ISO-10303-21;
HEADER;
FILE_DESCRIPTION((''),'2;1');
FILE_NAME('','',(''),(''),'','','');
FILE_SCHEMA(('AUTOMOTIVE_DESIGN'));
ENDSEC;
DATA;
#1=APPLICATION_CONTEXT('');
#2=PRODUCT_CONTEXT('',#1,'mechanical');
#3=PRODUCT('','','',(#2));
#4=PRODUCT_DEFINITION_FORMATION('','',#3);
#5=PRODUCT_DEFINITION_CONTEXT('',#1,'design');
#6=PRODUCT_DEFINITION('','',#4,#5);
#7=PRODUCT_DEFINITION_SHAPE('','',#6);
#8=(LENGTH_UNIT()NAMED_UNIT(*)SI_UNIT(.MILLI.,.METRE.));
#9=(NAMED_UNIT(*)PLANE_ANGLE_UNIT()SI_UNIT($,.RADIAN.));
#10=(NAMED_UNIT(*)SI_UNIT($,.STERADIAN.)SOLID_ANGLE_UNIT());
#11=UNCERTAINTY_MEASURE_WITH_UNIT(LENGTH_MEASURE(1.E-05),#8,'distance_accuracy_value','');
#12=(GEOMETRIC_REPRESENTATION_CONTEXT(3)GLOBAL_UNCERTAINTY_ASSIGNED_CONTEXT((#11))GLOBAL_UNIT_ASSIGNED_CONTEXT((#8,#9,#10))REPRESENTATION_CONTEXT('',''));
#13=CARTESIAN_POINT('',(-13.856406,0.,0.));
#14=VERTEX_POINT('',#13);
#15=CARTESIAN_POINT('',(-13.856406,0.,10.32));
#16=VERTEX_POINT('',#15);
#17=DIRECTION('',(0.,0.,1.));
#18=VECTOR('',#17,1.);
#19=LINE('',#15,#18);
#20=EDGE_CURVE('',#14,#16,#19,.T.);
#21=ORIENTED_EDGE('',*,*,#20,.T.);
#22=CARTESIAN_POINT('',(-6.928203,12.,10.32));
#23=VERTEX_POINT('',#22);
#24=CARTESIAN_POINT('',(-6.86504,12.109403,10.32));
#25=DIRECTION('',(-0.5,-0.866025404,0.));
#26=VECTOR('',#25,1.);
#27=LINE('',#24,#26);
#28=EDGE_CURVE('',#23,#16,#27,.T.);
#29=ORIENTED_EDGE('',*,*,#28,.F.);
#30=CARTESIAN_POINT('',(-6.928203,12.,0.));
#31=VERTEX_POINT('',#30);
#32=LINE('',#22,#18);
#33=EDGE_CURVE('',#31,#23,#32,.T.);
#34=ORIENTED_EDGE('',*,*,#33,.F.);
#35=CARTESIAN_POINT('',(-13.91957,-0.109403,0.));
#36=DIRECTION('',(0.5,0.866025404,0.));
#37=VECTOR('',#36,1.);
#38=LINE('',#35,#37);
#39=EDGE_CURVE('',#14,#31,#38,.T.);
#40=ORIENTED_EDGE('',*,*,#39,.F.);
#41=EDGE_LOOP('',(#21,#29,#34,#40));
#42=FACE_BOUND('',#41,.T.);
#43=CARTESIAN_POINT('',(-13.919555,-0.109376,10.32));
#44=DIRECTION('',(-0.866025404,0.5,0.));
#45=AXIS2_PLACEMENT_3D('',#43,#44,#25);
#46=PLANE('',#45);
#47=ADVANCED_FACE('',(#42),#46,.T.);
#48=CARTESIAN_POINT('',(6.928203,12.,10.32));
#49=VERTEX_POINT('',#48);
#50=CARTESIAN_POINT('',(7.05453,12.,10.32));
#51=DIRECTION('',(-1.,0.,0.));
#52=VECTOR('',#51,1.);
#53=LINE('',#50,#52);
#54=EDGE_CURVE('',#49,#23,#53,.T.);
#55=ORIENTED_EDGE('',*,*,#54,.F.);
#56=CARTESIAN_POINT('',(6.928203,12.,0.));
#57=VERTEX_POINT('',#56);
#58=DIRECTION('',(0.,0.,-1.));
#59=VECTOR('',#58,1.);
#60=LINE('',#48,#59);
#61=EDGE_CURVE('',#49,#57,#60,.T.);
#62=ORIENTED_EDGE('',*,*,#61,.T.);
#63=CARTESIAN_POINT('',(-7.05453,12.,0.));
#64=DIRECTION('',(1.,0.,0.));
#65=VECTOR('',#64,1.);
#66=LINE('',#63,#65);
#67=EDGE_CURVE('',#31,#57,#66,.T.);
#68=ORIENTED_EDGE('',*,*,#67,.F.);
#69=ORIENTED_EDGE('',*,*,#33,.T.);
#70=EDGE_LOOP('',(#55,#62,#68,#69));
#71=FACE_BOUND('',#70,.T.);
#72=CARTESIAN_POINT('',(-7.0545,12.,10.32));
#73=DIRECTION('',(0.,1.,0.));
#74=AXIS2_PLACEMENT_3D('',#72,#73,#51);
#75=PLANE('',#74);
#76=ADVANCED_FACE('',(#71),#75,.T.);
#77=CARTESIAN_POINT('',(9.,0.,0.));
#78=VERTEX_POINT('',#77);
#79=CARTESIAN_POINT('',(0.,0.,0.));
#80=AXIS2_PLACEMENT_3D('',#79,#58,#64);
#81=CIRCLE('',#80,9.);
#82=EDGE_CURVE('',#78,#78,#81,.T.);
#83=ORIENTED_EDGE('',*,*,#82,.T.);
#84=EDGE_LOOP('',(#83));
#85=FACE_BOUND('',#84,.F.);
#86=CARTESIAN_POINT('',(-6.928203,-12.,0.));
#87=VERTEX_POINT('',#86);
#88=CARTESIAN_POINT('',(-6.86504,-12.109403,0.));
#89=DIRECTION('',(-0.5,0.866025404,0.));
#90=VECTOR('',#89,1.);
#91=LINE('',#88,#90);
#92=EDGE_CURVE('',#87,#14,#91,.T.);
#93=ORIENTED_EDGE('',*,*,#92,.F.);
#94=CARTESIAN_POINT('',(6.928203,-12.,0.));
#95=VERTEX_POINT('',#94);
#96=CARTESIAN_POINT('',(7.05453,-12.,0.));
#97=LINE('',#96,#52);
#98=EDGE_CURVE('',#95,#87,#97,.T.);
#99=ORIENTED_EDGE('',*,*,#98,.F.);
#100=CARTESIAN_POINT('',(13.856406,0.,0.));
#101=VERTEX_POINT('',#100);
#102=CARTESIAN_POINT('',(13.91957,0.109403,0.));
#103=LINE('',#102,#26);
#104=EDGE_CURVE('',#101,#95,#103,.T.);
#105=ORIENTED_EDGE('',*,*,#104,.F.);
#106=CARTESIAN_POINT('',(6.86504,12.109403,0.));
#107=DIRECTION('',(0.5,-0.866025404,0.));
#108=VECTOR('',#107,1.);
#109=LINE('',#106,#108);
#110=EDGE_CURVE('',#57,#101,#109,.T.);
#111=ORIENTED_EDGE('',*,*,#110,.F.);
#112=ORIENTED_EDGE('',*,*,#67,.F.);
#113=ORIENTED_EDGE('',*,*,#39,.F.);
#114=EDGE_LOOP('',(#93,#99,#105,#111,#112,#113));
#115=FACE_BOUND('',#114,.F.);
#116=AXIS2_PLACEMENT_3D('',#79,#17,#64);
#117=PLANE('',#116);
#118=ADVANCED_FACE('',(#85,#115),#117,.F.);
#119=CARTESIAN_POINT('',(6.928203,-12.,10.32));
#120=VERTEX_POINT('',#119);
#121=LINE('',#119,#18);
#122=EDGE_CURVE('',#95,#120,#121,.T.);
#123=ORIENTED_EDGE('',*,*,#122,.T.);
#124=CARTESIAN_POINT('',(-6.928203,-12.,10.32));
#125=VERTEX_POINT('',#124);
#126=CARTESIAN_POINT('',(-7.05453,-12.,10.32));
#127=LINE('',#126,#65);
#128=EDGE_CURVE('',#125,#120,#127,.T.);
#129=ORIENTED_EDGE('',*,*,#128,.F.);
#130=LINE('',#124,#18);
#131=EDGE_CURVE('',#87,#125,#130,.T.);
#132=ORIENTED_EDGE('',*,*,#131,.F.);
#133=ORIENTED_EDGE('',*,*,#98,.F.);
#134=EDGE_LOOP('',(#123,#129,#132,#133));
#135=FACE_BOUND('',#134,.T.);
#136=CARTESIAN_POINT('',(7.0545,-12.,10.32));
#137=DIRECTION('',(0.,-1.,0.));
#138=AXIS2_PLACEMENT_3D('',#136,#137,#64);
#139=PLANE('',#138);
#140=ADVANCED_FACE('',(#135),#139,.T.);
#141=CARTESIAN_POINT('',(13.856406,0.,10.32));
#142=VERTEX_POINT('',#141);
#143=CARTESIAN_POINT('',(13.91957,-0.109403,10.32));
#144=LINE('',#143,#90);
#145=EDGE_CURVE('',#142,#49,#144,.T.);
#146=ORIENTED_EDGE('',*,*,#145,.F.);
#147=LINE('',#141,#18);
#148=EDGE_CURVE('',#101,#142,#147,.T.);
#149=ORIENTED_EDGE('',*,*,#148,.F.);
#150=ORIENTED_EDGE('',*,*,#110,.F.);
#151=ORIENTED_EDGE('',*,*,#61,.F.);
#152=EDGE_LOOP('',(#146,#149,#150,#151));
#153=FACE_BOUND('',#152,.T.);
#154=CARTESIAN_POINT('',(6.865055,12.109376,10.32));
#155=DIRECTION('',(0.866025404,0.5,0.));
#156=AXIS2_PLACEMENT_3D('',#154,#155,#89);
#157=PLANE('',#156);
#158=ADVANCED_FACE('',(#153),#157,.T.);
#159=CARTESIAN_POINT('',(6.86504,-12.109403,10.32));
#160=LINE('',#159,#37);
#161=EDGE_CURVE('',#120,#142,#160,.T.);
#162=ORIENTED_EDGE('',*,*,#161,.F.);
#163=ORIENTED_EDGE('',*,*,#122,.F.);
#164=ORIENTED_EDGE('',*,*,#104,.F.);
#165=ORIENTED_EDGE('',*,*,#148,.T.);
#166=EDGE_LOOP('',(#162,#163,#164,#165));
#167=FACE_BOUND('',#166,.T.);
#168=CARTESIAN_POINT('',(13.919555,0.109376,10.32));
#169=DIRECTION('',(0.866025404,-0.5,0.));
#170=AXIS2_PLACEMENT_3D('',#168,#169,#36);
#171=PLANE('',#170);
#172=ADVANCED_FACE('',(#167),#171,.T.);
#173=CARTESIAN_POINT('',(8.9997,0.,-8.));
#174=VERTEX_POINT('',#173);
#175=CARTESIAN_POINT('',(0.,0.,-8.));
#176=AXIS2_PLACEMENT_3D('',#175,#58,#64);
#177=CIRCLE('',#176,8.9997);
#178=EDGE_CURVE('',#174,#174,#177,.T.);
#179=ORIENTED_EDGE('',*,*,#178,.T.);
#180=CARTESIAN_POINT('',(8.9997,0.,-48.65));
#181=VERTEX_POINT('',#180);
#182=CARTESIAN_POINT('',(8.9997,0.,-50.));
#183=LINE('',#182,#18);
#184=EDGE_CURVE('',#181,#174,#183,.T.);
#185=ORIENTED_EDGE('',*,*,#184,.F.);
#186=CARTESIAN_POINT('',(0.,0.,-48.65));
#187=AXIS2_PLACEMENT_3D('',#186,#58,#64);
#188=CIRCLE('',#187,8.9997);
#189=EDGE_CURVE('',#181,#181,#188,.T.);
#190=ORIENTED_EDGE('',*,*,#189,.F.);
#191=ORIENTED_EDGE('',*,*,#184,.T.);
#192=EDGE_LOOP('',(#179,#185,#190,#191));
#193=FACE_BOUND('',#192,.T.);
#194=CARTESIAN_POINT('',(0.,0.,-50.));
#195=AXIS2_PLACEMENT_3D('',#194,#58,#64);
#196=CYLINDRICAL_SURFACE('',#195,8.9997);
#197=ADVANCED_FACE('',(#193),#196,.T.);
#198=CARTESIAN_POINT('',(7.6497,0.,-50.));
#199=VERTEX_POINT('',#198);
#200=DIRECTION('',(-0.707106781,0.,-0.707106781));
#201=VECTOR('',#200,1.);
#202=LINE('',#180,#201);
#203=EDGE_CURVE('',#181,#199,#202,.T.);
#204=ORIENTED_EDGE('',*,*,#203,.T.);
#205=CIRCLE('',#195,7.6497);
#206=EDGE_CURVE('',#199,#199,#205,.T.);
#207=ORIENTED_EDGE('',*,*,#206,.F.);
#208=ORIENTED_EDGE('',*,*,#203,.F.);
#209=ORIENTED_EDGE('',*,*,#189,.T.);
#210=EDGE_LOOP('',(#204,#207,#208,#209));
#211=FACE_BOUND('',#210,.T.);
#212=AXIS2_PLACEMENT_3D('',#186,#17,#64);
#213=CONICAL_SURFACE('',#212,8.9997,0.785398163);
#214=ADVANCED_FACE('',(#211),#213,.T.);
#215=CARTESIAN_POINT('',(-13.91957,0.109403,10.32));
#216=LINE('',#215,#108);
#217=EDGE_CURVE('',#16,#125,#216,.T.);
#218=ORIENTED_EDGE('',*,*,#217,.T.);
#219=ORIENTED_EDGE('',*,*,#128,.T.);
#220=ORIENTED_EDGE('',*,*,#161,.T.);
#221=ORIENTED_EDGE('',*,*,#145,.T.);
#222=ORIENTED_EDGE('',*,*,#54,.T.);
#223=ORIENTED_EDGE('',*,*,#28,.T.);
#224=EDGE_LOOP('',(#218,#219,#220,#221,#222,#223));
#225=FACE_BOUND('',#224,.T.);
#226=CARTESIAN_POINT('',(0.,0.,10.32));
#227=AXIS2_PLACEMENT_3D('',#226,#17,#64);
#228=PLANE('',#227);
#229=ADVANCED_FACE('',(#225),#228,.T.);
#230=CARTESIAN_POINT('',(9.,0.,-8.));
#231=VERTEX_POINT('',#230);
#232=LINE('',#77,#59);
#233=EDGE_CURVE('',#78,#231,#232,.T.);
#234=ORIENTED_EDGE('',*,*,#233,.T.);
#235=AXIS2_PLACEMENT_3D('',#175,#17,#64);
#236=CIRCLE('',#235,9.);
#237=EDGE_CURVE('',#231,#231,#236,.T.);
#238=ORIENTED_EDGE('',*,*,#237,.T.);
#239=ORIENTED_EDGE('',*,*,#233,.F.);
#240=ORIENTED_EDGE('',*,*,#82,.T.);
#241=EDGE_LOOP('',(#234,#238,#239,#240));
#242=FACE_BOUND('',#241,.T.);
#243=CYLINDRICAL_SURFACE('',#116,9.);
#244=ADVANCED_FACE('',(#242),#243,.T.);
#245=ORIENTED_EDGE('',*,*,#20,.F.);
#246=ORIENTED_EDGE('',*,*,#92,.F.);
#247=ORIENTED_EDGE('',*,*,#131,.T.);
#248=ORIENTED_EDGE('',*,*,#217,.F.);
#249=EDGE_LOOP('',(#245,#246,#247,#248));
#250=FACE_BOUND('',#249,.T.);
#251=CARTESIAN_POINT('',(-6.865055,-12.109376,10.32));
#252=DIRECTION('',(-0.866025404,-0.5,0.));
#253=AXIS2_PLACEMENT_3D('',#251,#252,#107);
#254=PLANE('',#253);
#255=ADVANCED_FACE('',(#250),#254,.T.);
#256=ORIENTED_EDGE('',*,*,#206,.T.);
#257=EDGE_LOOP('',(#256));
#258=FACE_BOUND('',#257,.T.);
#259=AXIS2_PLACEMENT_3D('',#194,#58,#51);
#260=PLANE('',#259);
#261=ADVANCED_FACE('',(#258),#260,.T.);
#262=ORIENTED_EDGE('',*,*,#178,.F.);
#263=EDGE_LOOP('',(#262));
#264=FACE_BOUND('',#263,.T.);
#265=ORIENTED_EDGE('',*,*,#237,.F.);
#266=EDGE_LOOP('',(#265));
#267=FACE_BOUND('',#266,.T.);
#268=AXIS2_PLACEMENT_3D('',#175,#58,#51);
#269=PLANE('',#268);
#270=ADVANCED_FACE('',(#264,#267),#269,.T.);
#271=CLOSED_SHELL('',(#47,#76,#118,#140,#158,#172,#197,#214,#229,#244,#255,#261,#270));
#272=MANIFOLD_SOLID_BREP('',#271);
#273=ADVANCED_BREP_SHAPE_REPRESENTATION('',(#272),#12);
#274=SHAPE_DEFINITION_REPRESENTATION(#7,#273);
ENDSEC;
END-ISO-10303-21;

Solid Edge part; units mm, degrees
sketch "Sketch1" plane through (0, 0, 0) normal (0, 0, 1) x (1, 0, 0)
  circle A0 centre (0, 0) radius 13.92
  dimension "D1" = 27.84
extrude "Protrusion1" add sketch "Sketch1" along normal blind 10.32
sketch "Sketch2" plane through (0, 0, 0) normal (0, 0, -1) x (1, 0, 0)
  circle A0 centre (0, 0) radius 9
extrude "Protrusion2" add sketch "Sketch2" along normal blind 50
sketch "Sketch3" plane through (0, 0, -50) normal (0, 0, -1) x (1, 0, 0)
  circle A0 centre (0, 0) radius 8.9997
extrude "Cutout1" cut sketch "Sketch3" against normal blind 42 flip side to cut
chamfer "Chamfer_1" distance 1.35 angle 45 1 edges at (-8.9997, 0, -50)
sketch "Sketch4" plane through (0, 0, 10.32) normal (0, 0, 1) x (1, 0, 0)
  line L0 (-7.0545, 12) -> (7.0545, 12)
  dimension "D1" = 24
extrude "Cutout2" cut sketch "Sketch4" against normal up to next material side at (0, 12.05, 10.32)
pattern_circular "Pattern1" count 6 over 360 about axis through (0, 0, 10.32) along (0, 0, 1) of "Cutout2"
properties part number "24100969"
